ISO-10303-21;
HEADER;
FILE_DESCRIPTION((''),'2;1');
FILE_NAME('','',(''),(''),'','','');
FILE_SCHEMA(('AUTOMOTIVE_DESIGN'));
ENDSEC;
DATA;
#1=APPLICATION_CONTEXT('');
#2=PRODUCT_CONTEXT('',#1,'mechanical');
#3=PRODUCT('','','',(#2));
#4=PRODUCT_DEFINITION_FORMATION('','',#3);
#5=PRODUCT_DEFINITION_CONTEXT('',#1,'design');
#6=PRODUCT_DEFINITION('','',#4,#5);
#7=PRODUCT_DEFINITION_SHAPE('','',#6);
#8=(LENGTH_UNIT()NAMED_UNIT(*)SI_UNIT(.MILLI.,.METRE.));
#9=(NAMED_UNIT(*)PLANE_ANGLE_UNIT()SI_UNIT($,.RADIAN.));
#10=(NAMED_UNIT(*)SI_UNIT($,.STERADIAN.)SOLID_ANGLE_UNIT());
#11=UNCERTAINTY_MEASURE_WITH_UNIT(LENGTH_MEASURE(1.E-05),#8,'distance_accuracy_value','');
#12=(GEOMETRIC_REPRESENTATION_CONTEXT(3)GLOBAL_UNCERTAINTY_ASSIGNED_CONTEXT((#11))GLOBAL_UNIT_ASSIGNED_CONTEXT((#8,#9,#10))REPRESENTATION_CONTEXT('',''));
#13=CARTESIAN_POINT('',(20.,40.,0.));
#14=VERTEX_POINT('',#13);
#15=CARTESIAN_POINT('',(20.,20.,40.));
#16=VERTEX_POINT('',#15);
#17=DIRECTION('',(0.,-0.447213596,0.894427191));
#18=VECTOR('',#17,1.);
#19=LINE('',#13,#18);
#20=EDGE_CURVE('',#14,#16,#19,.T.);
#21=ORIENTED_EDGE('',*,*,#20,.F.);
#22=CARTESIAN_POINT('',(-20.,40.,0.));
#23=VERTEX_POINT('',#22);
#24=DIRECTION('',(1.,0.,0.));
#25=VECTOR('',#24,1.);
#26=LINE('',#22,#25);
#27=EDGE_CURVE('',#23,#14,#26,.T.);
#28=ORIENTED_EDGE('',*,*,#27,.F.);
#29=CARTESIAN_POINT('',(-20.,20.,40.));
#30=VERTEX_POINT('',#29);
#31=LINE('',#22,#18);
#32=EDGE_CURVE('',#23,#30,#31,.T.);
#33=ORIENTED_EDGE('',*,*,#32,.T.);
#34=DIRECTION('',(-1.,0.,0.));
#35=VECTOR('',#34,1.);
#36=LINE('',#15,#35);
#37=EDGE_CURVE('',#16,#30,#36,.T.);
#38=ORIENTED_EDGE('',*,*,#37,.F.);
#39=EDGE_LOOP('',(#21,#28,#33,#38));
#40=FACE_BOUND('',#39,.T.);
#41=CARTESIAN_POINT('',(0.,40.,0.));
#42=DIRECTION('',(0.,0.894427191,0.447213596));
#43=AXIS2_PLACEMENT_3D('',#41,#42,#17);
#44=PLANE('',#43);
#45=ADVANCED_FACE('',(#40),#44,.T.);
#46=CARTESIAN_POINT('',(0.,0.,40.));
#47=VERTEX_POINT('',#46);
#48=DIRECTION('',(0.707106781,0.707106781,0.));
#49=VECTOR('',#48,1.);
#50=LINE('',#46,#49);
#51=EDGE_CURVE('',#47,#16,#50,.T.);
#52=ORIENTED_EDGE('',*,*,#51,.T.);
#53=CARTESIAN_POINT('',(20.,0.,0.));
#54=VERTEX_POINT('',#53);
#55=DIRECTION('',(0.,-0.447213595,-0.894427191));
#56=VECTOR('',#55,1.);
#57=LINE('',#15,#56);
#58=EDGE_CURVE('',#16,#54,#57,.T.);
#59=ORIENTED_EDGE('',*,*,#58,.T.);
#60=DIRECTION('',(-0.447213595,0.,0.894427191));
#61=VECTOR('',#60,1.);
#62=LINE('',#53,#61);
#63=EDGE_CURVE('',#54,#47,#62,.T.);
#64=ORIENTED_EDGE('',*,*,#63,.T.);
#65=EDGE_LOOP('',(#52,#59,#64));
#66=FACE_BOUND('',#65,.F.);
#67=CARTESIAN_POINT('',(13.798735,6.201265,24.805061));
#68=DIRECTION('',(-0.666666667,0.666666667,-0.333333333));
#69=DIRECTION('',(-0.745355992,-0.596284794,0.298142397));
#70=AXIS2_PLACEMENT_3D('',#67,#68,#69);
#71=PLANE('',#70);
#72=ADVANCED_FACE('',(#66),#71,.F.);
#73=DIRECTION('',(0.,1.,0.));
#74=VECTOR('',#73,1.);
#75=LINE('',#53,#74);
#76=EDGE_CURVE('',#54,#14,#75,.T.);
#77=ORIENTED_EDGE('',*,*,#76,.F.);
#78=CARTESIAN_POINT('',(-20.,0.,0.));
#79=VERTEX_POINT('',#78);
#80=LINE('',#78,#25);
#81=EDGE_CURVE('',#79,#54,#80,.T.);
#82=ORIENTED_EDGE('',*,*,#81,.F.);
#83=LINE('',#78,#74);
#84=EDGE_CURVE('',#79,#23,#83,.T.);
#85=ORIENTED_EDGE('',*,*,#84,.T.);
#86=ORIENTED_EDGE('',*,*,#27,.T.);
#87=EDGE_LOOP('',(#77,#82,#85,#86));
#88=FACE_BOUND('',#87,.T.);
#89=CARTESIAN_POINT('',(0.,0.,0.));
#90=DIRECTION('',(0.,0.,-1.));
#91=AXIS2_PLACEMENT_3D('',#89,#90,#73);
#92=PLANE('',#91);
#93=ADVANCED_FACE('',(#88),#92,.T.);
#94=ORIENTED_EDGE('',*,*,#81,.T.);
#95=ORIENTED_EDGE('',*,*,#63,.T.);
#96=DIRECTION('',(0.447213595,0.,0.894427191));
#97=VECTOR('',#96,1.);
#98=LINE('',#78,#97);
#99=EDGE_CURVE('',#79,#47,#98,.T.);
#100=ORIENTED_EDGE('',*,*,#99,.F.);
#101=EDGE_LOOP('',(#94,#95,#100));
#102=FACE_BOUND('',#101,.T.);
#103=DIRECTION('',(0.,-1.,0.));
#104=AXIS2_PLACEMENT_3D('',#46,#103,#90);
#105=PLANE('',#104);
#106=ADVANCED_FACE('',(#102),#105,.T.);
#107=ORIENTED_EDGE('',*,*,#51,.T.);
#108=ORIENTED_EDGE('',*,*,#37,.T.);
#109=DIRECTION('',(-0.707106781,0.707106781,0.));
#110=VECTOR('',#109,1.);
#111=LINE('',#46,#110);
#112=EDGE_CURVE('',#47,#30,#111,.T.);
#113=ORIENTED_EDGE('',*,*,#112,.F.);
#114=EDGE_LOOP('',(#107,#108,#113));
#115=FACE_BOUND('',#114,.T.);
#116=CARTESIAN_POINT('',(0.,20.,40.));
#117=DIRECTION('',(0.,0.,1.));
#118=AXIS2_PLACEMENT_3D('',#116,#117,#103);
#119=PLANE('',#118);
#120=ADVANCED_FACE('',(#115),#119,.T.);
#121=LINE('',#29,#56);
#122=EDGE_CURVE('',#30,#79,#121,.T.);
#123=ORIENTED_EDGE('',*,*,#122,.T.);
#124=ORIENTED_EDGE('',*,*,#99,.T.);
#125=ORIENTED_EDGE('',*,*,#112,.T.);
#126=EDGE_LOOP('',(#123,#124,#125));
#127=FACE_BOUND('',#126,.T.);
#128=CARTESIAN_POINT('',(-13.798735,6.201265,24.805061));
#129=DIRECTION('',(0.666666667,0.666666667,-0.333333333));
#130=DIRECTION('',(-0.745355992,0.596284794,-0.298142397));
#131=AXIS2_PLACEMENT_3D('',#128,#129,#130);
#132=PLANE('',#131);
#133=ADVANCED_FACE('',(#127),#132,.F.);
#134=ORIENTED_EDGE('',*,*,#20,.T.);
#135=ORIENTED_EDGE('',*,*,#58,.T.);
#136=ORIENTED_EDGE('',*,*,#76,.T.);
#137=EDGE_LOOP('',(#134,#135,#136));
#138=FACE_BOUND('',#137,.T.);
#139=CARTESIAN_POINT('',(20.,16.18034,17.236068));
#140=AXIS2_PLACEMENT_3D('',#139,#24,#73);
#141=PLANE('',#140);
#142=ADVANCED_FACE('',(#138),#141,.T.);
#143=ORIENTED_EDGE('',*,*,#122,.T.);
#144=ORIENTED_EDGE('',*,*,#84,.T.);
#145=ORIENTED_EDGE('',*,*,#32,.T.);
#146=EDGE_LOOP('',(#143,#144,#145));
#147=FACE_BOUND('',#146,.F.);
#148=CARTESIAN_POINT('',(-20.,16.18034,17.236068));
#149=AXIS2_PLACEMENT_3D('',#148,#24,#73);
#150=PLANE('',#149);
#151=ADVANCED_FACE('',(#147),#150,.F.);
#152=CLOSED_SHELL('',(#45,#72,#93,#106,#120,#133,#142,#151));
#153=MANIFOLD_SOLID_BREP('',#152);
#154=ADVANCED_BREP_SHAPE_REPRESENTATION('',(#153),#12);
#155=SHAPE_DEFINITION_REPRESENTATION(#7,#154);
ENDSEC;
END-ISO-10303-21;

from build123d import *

# Parameters (mm, degrees)
F1_DEPTH = 20
F5_DEPTH = 13.3343333333


# Not quite as in the source:
# - a pattern or mirror of a feature is missing from the dataset's text; its kind, count and spacing are read off the source's solid


with BuildPart() as f1:
    # F0 (on Right) → F1 (new body, symmetric)
    with BuildSketch(Plane.YZ):
        Polygon((0, 40), (0, 0), (40, 0), (20, 40), align=None)
    extrude(amount=F1_DEPTH, both=True)

    # F4 (on 3pt) → F5 (cut, through all)
    with BuildSketch(Plane(origin=(8.8888888889, -8.8888888889, 4.4444444444), x_dir=(-0.7453559925, -0.596284794, 0.298142397), z_dir=(-0.6666666667, 0.6666666667, -0.3333333333))):
        Polygon((-14.90711985, 0), (11.92569588, 35.77708764), (-14.90711985, 44.72135955), align=None)
    f5 = extrude(amount=-F5_DEPTH, mode=Mode.SUBTRACT)

    # F5_copies: F5 across plane
    add(f5.mirror(Plane(origin=(0, 0, 0), x_dir=(0, 0, -1), z_dir=(-1, 0, 0))), mode=Mode.SUBTRACT)


solid = f1.part
